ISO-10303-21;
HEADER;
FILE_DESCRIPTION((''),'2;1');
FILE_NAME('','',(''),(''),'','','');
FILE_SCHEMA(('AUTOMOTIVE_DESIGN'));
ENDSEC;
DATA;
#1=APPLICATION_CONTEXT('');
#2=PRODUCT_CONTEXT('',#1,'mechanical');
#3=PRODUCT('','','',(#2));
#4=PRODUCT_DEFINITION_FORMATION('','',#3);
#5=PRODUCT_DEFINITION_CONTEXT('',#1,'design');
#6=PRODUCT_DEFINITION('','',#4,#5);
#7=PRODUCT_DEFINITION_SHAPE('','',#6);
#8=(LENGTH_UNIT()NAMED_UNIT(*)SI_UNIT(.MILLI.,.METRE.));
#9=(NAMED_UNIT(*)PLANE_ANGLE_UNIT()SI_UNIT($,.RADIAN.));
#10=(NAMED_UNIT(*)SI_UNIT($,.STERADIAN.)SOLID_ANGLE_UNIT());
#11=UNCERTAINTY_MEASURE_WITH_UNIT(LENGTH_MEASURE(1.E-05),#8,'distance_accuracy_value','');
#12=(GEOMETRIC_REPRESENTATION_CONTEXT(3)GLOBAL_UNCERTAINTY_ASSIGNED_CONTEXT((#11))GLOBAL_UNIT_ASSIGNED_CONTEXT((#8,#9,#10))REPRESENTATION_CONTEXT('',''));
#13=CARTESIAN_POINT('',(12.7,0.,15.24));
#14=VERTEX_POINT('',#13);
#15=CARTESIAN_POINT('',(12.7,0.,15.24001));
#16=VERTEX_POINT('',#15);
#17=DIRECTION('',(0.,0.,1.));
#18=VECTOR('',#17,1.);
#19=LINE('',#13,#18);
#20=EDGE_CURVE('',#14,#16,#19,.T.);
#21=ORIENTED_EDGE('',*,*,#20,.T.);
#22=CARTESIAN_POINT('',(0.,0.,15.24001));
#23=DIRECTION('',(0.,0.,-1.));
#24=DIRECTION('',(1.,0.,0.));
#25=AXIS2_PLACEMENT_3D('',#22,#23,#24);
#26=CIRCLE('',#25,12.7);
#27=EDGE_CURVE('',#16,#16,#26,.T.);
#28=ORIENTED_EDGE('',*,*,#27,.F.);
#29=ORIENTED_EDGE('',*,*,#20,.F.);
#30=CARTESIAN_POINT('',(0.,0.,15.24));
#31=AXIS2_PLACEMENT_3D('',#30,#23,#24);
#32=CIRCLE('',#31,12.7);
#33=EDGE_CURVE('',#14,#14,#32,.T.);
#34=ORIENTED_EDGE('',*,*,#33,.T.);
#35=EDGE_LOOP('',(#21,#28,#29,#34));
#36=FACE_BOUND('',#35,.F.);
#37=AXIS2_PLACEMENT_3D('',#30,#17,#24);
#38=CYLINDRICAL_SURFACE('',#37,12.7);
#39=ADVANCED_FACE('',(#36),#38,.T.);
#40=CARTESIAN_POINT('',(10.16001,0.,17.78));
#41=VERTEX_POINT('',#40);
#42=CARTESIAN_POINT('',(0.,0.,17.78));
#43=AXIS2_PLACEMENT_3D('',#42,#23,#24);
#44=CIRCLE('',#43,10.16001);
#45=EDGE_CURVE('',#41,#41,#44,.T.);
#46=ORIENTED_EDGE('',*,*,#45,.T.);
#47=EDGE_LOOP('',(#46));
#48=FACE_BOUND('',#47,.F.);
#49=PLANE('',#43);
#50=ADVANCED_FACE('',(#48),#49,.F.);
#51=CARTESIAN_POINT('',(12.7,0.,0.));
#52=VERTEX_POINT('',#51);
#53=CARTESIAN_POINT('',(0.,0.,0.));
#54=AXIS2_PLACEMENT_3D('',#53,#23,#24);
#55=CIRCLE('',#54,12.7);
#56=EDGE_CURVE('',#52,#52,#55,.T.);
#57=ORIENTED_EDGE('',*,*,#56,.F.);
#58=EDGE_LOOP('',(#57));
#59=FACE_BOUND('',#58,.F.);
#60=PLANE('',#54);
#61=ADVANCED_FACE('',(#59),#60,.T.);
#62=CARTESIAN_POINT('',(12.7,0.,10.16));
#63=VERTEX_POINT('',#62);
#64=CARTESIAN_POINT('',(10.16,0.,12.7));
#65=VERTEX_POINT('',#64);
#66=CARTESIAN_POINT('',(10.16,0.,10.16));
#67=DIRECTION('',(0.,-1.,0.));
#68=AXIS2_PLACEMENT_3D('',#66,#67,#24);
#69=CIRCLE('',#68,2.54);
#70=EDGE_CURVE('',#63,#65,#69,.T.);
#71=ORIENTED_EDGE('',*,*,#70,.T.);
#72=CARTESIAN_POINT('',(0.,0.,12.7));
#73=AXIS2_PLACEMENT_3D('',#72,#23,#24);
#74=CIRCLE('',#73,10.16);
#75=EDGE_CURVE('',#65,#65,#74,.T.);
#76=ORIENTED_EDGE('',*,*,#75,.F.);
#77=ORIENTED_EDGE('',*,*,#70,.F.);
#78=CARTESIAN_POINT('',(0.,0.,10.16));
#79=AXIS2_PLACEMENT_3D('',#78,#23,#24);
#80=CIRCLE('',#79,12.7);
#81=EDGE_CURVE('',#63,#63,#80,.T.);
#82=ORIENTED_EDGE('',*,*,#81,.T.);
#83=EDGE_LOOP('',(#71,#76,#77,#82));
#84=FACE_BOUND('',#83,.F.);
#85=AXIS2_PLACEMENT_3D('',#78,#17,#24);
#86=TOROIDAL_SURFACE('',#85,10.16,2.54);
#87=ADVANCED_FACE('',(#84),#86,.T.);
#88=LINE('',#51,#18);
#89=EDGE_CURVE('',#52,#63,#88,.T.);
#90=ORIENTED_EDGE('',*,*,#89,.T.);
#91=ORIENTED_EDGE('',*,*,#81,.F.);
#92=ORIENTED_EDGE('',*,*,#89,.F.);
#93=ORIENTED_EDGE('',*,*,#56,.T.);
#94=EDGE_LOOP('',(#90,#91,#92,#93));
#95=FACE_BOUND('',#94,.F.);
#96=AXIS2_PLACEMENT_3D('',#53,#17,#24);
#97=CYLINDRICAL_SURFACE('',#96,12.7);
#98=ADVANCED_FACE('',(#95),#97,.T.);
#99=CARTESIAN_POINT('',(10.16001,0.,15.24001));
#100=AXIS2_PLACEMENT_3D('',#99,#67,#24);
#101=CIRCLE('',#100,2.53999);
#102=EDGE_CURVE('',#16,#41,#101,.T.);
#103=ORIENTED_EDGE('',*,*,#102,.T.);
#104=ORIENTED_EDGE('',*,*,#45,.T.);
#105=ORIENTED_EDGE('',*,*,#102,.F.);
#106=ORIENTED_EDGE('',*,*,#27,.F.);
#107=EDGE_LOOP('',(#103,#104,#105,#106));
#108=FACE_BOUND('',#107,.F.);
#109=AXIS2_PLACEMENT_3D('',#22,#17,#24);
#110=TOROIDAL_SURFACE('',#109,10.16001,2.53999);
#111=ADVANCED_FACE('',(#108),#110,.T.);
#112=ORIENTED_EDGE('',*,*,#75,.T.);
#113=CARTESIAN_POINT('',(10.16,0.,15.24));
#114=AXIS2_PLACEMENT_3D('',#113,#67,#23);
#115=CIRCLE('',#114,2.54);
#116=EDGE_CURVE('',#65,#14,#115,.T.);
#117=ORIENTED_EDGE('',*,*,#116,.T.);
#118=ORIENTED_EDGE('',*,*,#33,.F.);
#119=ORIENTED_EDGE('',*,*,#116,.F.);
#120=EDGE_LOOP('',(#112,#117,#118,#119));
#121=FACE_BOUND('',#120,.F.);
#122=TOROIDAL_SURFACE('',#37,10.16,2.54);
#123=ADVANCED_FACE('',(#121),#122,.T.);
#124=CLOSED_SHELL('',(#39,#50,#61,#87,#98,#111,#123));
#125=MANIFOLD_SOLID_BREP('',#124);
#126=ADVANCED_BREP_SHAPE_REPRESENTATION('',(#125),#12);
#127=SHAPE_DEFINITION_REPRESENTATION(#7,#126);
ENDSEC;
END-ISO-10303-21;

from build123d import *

# Parameters (mm, degrees)
F2_R = 2.53999


# Not quite as in the source:
# - a fillet or chamfer is up to 0.001 mm smaller than in the source, because OpenCascade refuses the exact size


with BuildPart() as f1:
    # F0 (on Front) → F1 (revolve)
    with BuildSketch(Plane.XZ):
        with BuildLine():
            Line((0, 17.78), (0, 0))
            Line((0, 0), (12.7, 0))
            Line((12.7, 0), (12.7, 10.16))
            ThreePointArc((12.7, 10.16), (11.9560512242, 11.9560512242), (10.16, 12.7))
            ThreePointArc((10.16, 12.7), (11.9560512242, 13.4439487758), (12.7, 15.24))
            Line((12.7, 15.24), (12.7, 17.78))
            Line((12.7, 17.78), (0, 17.78))
        make_face()
    revolve(axis=Axis((0, 0, 8.89), (0, 0, -1)))

    # F2 (radius 2.54 in the source; OpenCascade refuses exactly that, so slightly less here)
    f2_edges = [f1.edges().sort_by_distance(p)[0] for p in [
        (-12.7, 0, 17.78),
    ]]
    fillet(f2_edges, radius=F2_R)


solid = f1.part
